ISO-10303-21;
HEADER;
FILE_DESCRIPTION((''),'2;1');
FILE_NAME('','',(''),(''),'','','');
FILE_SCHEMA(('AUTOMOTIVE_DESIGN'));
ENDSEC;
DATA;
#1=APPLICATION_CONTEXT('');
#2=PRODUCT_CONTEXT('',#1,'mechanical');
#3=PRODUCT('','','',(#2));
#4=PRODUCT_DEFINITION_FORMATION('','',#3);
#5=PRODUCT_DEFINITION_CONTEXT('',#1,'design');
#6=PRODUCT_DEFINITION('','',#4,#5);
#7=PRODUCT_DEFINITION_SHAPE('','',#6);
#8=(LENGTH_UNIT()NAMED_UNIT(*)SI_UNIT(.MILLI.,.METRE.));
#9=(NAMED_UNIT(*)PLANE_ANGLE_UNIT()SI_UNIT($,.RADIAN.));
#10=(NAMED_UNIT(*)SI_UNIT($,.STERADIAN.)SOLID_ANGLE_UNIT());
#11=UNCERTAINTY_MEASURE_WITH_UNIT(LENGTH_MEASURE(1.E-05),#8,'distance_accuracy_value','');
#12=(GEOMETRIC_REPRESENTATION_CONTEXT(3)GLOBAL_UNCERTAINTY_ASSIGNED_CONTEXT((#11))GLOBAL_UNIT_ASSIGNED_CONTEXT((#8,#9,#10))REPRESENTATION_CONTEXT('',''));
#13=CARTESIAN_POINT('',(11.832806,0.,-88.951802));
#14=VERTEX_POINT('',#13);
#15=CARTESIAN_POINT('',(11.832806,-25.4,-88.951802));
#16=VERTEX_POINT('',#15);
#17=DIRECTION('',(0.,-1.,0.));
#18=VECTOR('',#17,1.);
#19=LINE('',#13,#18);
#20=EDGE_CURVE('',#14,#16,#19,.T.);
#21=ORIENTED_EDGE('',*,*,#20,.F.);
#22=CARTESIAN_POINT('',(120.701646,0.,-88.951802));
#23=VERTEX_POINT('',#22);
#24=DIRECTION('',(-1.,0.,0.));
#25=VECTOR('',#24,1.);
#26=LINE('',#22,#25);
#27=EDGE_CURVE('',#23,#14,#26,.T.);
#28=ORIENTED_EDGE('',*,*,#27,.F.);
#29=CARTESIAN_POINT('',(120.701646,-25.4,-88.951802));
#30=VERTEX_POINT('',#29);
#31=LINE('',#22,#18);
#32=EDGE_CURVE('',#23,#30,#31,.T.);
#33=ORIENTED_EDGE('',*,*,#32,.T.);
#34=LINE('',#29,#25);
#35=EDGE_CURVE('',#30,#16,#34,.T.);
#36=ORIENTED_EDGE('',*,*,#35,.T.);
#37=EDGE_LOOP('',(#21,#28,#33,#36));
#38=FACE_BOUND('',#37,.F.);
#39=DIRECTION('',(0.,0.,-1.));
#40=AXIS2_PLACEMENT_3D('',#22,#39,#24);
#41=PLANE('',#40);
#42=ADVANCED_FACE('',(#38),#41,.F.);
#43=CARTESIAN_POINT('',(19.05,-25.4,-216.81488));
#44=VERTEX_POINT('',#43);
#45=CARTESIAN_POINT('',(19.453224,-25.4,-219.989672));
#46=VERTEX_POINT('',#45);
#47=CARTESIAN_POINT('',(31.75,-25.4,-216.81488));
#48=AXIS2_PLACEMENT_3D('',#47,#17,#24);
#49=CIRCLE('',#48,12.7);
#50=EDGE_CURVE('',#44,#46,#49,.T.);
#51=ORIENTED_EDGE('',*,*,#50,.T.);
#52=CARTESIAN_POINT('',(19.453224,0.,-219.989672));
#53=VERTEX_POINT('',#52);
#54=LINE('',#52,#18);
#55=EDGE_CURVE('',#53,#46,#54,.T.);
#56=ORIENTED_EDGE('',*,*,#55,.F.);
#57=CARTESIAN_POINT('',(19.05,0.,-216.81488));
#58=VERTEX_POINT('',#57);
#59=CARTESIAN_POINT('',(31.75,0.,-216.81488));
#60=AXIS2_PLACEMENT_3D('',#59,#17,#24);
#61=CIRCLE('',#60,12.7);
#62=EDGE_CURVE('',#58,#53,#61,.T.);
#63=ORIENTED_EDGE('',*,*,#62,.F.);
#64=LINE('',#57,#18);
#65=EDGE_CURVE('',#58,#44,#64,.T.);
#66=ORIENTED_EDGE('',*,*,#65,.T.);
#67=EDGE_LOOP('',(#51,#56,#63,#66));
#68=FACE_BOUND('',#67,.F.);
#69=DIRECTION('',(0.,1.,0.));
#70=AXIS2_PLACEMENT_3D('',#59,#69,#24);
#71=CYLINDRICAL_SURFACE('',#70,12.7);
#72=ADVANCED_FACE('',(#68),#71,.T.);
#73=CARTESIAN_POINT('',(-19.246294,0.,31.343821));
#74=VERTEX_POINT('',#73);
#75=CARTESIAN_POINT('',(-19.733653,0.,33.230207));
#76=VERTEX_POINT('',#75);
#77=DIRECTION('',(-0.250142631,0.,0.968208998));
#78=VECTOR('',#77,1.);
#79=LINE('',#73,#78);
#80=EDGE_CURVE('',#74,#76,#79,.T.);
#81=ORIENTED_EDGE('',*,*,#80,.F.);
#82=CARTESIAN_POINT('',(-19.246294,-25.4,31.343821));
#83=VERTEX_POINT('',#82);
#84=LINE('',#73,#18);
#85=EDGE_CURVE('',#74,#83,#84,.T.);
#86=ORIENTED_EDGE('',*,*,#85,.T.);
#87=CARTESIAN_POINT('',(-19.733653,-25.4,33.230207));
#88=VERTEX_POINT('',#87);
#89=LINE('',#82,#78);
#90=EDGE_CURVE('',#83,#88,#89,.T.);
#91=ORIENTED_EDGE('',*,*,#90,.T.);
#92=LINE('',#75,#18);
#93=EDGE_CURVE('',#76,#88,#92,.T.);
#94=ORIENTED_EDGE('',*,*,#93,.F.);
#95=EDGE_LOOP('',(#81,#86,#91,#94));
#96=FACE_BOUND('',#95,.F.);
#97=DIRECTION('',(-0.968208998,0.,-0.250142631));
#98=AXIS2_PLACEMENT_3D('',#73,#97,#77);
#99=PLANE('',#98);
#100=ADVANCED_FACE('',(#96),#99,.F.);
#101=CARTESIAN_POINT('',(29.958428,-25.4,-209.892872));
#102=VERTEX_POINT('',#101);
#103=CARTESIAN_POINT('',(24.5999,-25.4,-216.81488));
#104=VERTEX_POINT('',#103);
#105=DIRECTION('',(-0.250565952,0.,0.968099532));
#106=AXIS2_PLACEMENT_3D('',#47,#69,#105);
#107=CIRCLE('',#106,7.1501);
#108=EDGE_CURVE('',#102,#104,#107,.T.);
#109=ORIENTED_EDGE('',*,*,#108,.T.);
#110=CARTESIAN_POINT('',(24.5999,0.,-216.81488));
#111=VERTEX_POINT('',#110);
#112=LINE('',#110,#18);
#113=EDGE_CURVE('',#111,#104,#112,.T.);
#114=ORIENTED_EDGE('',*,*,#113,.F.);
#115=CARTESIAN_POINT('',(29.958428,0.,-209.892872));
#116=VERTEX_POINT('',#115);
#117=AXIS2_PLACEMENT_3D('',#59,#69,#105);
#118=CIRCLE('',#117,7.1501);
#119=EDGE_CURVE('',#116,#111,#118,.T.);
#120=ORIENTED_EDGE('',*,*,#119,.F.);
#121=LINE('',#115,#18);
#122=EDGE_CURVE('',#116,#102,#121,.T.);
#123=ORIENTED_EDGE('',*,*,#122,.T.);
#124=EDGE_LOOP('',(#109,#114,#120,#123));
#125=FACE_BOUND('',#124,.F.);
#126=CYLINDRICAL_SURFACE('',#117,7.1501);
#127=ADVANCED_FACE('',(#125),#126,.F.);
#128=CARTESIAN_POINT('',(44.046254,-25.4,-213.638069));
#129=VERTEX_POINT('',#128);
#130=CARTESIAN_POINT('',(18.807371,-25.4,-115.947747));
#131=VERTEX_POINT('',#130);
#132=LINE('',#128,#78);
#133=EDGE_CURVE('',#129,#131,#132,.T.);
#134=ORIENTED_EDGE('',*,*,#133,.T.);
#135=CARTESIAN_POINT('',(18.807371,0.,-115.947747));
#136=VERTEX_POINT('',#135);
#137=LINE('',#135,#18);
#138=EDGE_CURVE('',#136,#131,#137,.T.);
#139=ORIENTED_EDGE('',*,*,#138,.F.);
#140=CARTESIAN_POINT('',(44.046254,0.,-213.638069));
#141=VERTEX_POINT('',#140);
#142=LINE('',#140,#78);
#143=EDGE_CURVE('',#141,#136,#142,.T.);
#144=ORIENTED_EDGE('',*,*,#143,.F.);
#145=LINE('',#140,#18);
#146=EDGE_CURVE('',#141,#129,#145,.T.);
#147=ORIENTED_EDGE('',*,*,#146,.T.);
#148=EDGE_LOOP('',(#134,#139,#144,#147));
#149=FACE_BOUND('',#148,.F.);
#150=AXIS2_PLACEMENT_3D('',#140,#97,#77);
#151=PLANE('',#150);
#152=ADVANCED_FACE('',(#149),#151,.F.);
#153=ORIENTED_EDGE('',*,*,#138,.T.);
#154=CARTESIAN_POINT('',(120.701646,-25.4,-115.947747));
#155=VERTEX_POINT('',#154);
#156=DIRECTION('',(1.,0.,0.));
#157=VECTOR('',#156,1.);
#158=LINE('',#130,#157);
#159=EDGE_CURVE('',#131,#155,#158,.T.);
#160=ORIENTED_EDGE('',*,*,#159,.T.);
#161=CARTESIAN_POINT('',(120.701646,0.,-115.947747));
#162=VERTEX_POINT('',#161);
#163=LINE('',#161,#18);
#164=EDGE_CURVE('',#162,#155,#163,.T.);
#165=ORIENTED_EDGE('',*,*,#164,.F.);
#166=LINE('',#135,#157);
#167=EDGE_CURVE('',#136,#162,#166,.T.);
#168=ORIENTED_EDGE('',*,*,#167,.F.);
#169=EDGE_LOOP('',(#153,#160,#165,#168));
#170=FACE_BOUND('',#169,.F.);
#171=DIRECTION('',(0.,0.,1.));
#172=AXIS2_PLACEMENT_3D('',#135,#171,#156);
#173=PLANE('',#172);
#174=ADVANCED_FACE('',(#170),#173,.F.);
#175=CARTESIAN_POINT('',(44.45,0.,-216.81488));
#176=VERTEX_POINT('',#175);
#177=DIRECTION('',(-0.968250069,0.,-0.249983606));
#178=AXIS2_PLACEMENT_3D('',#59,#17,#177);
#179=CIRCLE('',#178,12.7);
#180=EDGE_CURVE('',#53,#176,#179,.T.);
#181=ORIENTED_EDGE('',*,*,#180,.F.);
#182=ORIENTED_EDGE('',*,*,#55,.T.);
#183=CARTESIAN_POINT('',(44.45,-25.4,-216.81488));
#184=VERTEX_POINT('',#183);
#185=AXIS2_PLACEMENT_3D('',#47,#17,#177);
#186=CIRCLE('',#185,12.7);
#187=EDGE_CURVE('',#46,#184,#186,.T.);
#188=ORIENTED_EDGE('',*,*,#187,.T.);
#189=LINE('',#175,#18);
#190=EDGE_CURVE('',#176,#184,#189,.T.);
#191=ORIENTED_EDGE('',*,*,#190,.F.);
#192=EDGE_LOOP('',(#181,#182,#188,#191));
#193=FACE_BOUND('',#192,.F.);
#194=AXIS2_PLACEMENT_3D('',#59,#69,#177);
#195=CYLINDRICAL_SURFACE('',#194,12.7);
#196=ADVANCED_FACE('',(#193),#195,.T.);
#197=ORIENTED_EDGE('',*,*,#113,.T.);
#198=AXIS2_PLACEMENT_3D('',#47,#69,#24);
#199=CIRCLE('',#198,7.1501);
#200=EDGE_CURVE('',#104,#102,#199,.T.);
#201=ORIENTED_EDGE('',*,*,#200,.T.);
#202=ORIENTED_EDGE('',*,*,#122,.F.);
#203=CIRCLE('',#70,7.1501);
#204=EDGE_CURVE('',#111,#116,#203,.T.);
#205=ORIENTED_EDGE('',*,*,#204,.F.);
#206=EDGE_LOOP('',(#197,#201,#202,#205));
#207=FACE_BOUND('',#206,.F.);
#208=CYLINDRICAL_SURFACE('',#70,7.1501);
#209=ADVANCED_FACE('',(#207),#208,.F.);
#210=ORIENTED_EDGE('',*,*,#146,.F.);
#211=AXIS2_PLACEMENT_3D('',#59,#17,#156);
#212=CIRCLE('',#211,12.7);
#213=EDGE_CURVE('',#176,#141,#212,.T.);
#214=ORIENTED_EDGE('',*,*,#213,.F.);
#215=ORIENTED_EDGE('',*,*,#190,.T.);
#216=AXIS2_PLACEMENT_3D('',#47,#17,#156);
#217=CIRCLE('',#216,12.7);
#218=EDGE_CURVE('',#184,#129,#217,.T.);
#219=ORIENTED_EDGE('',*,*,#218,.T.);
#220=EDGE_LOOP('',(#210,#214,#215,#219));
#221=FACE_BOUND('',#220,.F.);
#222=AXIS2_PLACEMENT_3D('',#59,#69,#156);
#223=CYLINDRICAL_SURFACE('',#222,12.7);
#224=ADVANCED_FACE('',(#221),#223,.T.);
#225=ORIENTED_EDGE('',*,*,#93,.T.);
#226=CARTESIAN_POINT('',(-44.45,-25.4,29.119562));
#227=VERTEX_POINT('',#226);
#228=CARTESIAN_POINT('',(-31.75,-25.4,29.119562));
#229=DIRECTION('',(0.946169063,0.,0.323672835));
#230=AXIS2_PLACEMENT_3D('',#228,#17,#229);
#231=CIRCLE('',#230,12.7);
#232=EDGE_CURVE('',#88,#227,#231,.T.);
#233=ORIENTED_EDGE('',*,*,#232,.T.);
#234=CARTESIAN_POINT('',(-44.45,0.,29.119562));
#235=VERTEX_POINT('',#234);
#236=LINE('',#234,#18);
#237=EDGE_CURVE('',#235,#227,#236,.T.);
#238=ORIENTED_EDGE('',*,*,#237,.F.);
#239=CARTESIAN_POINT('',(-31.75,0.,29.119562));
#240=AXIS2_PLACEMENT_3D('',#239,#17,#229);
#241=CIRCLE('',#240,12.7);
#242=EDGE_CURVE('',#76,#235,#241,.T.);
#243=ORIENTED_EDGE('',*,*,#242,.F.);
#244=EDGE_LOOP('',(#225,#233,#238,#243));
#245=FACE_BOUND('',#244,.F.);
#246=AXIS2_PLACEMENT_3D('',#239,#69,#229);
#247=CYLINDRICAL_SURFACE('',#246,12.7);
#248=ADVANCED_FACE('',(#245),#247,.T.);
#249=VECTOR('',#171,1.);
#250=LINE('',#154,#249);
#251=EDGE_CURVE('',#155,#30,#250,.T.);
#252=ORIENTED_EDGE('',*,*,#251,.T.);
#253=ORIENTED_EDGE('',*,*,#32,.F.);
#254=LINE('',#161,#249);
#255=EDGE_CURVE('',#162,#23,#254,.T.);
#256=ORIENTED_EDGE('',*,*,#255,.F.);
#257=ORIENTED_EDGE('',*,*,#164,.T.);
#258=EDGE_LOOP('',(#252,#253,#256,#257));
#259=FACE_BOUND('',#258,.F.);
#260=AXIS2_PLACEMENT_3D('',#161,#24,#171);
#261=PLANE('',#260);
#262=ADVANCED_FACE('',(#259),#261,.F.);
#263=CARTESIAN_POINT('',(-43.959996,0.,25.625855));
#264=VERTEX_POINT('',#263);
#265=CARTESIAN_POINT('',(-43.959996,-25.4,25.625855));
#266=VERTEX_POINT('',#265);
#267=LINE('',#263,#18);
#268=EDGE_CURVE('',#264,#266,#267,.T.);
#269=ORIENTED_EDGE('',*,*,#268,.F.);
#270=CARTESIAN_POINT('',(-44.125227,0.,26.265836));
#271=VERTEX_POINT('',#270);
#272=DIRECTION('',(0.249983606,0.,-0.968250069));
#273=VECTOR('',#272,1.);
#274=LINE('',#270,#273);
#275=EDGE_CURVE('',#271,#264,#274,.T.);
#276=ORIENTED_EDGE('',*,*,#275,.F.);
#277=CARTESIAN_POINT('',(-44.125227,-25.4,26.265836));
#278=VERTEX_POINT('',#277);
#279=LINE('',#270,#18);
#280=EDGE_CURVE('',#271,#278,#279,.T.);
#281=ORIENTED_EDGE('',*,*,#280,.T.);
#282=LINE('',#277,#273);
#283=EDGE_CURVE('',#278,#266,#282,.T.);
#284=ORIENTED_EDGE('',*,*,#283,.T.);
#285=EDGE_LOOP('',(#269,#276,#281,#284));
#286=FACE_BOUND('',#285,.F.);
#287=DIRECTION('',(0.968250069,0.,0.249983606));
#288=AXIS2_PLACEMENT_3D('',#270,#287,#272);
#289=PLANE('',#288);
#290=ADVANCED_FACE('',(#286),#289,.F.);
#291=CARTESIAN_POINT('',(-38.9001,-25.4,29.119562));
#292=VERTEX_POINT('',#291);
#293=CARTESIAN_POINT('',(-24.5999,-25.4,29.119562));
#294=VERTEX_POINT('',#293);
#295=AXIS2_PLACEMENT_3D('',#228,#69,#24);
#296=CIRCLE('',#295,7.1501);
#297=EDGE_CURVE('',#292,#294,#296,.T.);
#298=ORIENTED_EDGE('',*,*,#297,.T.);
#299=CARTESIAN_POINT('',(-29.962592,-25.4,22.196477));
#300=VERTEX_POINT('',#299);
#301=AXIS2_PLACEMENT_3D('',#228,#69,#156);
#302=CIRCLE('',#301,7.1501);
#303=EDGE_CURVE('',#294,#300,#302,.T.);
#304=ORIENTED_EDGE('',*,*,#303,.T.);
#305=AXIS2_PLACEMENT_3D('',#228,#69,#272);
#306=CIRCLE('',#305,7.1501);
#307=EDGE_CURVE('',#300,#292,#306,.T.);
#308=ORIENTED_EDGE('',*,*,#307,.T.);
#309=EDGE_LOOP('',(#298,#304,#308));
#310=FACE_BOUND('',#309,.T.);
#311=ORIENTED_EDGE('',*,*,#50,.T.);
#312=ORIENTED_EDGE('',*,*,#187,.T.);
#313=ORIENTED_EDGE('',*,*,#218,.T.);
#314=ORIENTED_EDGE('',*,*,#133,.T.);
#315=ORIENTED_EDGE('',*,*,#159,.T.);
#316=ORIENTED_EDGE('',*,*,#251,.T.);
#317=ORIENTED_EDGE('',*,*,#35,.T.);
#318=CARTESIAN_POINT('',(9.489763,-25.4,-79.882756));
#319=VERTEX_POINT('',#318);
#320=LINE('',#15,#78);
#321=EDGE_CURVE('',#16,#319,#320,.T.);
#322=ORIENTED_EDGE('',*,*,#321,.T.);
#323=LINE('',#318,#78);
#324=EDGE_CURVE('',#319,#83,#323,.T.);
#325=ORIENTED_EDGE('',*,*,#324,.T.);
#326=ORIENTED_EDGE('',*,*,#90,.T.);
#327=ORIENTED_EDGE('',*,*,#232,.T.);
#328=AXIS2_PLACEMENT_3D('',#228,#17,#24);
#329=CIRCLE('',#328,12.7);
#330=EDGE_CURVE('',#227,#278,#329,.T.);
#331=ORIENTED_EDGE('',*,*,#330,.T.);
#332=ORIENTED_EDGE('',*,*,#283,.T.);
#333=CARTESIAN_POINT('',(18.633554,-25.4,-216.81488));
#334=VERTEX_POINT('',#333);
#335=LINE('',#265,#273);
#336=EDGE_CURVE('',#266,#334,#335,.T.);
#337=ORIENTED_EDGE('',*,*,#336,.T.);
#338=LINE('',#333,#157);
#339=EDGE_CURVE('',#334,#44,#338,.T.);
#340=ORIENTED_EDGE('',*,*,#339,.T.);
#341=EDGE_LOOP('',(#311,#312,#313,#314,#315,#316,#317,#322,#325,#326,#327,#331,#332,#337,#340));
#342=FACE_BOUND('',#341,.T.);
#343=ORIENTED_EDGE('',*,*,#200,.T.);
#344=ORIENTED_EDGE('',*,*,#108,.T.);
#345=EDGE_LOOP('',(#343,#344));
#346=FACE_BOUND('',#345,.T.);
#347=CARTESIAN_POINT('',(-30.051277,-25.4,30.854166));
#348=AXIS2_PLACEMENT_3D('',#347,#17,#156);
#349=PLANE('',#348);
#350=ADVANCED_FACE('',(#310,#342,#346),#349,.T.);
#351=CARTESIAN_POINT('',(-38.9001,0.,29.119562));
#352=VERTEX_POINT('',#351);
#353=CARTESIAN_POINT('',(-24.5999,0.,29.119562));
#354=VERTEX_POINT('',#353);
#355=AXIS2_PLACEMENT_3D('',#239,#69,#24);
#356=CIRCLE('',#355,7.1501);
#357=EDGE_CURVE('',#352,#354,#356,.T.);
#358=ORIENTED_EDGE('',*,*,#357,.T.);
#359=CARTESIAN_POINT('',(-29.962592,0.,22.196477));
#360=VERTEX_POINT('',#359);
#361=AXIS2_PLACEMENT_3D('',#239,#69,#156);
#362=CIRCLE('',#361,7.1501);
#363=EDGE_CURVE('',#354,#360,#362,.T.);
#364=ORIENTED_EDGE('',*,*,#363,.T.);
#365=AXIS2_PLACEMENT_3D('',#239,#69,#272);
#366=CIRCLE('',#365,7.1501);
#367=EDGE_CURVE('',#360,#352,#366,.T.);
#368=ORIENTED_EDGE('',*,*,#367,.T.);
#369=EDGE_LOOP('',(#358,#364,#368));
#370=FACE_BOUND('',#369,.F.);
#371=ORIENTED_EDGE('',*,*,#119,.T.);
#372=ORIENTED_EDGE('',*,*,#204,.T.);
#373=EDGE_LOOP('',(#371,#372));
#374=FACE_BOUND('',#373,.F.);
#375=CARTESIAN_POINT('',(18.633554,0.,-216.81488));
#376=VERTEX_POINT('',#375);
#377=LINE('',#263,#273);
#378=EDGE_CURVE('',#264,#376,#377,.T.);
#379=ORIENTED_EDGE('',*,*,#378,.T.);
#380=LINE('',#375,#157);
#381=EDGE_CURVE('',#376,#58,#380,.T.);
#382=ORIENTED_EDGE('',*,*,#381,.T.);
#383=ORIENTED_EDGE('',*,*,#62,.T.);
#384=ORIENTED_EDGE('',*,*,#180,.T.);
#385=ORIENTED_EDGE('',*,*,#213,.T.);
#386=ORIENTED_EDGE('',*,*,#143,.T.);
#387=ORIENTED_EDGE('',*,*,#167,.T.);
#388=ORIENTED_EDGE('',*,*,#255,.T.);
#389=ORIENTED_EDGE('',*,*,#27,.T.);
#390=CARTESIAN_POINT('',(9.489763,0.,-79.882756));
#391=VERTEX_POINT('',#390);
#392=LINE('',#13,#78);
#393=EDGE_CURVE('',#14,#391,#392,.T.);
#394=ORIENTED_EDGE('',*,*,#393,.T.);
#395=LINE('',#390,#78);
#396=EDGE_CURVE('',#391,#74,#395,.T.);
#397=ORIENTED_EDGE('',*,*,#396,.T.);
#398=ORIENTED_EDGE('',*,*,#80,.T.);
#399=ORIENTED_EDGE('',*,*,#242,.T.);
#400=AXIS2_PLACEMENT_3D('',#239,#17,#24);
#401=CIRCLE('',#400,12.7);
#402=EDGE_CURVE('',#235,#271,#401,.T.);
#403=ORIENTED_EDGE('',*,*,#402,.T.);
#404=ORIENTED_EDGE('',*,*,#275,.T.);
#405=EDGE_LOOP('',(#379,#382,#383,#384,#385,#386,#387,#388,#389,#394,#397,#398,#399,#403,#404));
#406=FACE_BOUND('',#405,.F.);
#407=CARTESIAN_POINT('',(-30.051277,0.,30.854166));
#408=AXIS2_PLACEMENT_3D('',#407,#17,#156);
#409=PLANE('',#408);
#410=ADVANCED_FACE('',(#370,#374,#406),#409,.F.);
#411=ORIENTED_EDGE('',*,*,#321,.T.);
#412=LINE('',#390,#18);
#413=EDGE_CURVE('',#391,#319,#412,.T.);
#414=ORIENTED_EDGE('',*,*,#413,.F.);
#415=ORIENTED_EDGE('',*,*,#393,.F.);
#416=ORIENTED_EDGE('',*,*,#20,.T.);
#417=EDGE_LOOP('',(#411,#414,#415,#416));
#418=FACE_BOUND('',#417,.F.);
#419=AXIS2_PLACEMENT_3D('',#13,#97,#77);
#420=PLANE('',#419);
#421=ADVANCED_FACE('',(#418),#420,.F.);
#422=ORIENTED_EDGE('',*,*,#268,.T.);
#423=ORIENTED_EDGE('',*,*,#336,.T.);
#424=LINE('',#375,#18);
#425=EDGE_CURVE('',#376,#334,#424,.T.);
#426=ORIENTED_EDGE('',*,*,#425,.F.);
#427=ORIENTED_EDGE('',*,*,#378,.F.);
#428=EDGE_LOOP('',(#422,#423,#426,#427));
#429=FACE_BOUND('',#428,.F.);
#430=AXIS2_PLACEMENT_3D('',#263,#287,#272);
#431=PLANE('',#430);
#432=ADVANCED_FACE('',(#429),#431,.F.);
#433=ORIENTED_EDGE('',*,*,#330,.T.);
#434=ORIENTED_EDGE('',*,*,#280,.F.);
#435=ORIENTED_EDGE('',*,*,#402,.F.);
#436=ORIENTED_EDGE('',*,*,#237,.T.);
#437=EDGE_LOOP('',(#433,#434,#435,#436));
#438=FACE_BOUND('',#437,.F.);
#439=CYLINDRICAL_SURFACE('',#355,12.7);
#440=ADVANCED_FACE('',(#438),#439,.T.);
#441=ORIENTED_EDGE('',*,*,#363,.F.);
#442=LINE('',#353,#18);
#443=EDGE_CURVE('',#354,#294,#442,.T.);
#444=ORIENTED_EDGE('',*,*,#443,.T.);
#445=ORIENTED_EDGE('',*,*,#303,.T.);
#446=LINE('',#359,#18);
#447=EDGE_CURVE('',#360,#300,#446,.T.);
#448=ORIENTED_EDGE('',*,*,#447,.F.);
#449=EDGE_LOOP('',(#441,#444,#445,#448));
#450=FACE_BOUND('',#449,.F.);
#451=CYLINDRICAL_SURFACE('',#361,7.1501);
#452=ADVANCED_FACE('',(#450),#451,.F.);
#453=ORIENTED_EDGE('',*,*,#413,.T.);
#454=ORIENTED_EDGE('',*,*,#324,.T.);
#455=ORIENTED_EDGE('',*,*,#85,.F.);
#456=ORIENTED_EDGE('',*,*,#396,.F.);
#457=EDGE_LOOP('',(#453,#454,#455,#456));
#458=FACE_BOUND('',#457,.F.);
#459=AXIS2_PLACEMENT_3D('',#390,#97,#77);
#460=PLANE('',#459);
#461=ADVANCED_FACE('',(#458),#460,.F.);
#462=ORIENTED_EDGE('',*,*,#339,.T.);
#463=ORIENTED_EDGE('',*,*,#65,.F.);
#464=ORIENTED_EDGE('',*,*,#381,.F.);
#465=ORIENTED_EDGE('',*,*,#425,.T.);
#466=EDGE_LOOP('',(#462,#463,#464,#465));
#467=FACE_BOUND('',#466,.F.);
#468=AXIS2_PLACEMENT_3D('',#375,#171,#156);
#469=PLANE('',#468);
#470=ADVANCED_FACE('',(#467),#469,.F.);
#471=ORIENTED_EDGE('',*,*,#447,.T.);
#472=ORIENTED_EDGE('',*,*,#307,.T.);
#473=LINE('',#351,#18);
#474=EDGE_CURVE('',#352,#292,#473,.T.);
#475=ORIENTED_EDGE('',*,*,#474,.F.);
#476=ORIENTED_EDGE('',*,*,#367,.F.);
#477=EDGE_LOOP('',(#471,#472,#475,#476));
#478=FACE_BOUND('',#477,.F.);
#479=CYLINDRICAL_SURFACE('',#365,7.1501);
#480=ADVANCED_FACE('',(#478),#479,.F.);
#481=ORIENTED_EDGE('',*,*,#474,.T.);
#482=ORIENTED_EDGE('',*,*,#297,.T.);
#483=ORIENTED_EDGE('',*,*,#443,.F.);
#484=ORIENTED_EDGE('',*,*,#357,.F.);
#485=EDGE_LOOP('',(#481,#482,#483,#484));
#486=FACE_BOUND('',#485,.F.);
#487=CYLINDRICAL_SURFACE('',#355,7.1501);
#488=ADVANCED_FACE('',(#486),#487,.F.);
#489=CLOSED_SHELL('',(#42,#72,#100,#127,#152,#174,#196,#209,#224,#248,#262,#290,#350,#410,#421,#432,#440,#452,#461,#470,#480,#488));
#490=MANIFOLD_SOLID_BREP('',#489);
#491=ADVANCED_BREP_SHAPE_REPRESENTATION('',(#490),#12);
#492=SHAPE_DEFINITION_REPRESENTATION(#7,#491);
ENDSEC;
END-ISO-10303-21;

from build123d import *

# Parameters (mm, degrees)
F1_DEPTH = 25.4


# Not quite as in the source:
# - a feature names something its author has since deleted; it is built from what else it names


with BuildPart() as f1:
    # F0 (on Front) → F1 (new body)
    with BuildSketch(Plane.XZ):
        with BuildLine():
            ThreePointArc((-38.9001, 29.1195621888), (-31.75, 36.2696621888), (-24.5999, 29.1195621888))
            ThreePointArc((-24.5999, 29.1195621888), (-26.0973866941, 24.7409901814), (-29.9625922208, 22.1964773676))
            Line((-29.9625922208, 22.1964773676), (-28.5752082075, 16.8227863075))
            ThreePointArc((-28.5752082075, 16.8227863075), (-21.7098342702, 21.3423472555), (-19.05, 29.1195621888))
            ThreePointArc((-19.05, 29.1195621888), (-19.0991685805, 30.2360138876), (-19.2462936057, 31.3438208077))
            Line((-19.2462936057, 31.3438208077), (-19.7336528982, 33.2302071905))
            ThreePointArc((-19.7336528982, 33.2302071905), (-33.8335536719, 41.6474831694), (-44.45, 29.1195621888))
            Line((-44.45, 29.1195621888), (-38.9001, 29.1195621888))
        make_face()
        with BuildLine():
            ThreePointArc((-29.9625922208, 22.1964773676), (-36.1285720074, 23.4669488829), (-38.9001, 29.1195621888))
            Line((-38.9001, 29.1195621888), (-44.45, 29.1195621888))
            ThreePointArc((-44.45, 29.1195621888), (-44.3685455909, 27.683488663), (-44.1252272171, 26.2658363215))
            Line((-44.1252272171, 26.2658363215), (-43.9599962271, 25.6258546831))
            ThreePointArc((-43.9599962271, 25.6258546831), (-38.0573158317, 18.0965060336), (-28.5752082075, 16.8227863075))
            Line((-28.5752082075, 16.8227863075), (-29.9625922208, 22.1964773676))
        make_face()
        with BuildLine():
            Line((28.5710442304, -204.5191802253), (-28.5752082075, 16.8227863075))
            ThreePointArc((-28.5752082075, 16.8227863075), (-38.0573158317, 18.0965060336), (-43.9599962271, 25.6258546831))
            Line((-43.9599962271, 25.6258546831), (18.6335537415, -216.8148802954))
            Line((18.6335537415, -216.8148802954), (19.05, -216.8148802954))
            ThreePointArc((19.05, -216.8148802954), (21.7085175827, -209.039365466), (28.5710442304, -204.5191802253))
        make_face()
        with BuildLine():
            ThreePointArc((-19.05, 29.1195621888), (-21.7098342702, 21.3423472555), (-28.5752082075, 16.8227863075))
            Line((-28.5752082075, 16.8227863075), (28.5710442304, -204.5191802253))
            ThreePointArc((28.5710442304, -204.5191802253), (38.1974658289, -205.8732083763), (44.0462542776, -213.6380688845))
            Line((44.0462542776, -213.6380688845), (18.8073706418, -115.9477465067))
            Line((18.8073706418, -115.9477465067), (11.8328057084, -88.9518022083))
            Line((11.8328057084, -88.9518022083), (9.4897628664, -79.8827556578))
            Line((9.4897628664, -79.8827556578), (-19.2462936057, 31.3438208077))
            ThreePointArc((-19.2462936057, 31.3438208077), (-19.0991685805, 30.2360138876), (-19.05, 29.1195621888))
        make_face()
        with BuildLine():
            Line((29.958428385, -209.8928718327), (28.5710442304, -204.5191802253))
            ThreePointArc((28.5710442304, -204.5191802253), (21.7085175827, -209.039365466), (19.05, -216.8148802954))
            Line((19.05, -216.8148802954), (24.5999, -216.8148802954))
            ThreePointArc((24.5999, -216.8148802954), (26.0960701183, -212.4380084784), (29.958428385, -209.8928718327))
        make_face()
        with BuildLine():
            ThreePointArc((44.0462542776, -213.6380688845), (38.1974658289, -205.8732083763), (28.5710442304, -204.5191802253))
            Line((28.5710442304, -204.5191802253), (29.958428385, -209.8928718327))
            ThreePointArc((29.958428385, -209.8928718327), (36.126871817, -211.1609504137), (38.9001, -216.8148802954))
            ThreePointArc((38.9001, -216.8148802954), (37.4012962188, -221.1951520972), (33.5332432967, -223.7390389703))
            Line((33.5332432967, -223.7390389703), (34.9206274513, -229.1127305777))
            ThreePointArc((34.9206274513, -229.1127305777), (41.7888487545, -224.5937951095), (44.45, -216.8148802954))
            ThreePointArc((44.45, -216.8148802954), (44.3486592407, -215.2136978145), (44.0462542776, -213.6380688845))
        make_face()
        with BuildLine():
            Line((24.5999, -216.8148802954), (19.05, -216.8148802954))
            ThreePointArc((19.05, -216.8148802954), (19.1512093102, -218.4150281492), (19.4532241187, -219.9896720879))
            ThreePointArc((19.4532241187, -219.9896720879), (25.2979309254, -227.7538384111), (34.9206274513, -229.1127305777))
            Line((34.9206274513, -229.1127305777), (33.5332432967, -223.7390389703))
            ThreePointArc((33.5332432967, -223.7390389703), (27.3697281982, -222.4661765142), (24.5999, -216.8148802954))
        make_face()
        Polygon((11.8328057084, -88.9518022083), (18.8073706418, -115.9477465067), (120.7016461253, -115.9477465067), (120.7016461253, -88.9518022083), align=None)
    extrude(amount=F1_DEPTH)


solid = f1.part
